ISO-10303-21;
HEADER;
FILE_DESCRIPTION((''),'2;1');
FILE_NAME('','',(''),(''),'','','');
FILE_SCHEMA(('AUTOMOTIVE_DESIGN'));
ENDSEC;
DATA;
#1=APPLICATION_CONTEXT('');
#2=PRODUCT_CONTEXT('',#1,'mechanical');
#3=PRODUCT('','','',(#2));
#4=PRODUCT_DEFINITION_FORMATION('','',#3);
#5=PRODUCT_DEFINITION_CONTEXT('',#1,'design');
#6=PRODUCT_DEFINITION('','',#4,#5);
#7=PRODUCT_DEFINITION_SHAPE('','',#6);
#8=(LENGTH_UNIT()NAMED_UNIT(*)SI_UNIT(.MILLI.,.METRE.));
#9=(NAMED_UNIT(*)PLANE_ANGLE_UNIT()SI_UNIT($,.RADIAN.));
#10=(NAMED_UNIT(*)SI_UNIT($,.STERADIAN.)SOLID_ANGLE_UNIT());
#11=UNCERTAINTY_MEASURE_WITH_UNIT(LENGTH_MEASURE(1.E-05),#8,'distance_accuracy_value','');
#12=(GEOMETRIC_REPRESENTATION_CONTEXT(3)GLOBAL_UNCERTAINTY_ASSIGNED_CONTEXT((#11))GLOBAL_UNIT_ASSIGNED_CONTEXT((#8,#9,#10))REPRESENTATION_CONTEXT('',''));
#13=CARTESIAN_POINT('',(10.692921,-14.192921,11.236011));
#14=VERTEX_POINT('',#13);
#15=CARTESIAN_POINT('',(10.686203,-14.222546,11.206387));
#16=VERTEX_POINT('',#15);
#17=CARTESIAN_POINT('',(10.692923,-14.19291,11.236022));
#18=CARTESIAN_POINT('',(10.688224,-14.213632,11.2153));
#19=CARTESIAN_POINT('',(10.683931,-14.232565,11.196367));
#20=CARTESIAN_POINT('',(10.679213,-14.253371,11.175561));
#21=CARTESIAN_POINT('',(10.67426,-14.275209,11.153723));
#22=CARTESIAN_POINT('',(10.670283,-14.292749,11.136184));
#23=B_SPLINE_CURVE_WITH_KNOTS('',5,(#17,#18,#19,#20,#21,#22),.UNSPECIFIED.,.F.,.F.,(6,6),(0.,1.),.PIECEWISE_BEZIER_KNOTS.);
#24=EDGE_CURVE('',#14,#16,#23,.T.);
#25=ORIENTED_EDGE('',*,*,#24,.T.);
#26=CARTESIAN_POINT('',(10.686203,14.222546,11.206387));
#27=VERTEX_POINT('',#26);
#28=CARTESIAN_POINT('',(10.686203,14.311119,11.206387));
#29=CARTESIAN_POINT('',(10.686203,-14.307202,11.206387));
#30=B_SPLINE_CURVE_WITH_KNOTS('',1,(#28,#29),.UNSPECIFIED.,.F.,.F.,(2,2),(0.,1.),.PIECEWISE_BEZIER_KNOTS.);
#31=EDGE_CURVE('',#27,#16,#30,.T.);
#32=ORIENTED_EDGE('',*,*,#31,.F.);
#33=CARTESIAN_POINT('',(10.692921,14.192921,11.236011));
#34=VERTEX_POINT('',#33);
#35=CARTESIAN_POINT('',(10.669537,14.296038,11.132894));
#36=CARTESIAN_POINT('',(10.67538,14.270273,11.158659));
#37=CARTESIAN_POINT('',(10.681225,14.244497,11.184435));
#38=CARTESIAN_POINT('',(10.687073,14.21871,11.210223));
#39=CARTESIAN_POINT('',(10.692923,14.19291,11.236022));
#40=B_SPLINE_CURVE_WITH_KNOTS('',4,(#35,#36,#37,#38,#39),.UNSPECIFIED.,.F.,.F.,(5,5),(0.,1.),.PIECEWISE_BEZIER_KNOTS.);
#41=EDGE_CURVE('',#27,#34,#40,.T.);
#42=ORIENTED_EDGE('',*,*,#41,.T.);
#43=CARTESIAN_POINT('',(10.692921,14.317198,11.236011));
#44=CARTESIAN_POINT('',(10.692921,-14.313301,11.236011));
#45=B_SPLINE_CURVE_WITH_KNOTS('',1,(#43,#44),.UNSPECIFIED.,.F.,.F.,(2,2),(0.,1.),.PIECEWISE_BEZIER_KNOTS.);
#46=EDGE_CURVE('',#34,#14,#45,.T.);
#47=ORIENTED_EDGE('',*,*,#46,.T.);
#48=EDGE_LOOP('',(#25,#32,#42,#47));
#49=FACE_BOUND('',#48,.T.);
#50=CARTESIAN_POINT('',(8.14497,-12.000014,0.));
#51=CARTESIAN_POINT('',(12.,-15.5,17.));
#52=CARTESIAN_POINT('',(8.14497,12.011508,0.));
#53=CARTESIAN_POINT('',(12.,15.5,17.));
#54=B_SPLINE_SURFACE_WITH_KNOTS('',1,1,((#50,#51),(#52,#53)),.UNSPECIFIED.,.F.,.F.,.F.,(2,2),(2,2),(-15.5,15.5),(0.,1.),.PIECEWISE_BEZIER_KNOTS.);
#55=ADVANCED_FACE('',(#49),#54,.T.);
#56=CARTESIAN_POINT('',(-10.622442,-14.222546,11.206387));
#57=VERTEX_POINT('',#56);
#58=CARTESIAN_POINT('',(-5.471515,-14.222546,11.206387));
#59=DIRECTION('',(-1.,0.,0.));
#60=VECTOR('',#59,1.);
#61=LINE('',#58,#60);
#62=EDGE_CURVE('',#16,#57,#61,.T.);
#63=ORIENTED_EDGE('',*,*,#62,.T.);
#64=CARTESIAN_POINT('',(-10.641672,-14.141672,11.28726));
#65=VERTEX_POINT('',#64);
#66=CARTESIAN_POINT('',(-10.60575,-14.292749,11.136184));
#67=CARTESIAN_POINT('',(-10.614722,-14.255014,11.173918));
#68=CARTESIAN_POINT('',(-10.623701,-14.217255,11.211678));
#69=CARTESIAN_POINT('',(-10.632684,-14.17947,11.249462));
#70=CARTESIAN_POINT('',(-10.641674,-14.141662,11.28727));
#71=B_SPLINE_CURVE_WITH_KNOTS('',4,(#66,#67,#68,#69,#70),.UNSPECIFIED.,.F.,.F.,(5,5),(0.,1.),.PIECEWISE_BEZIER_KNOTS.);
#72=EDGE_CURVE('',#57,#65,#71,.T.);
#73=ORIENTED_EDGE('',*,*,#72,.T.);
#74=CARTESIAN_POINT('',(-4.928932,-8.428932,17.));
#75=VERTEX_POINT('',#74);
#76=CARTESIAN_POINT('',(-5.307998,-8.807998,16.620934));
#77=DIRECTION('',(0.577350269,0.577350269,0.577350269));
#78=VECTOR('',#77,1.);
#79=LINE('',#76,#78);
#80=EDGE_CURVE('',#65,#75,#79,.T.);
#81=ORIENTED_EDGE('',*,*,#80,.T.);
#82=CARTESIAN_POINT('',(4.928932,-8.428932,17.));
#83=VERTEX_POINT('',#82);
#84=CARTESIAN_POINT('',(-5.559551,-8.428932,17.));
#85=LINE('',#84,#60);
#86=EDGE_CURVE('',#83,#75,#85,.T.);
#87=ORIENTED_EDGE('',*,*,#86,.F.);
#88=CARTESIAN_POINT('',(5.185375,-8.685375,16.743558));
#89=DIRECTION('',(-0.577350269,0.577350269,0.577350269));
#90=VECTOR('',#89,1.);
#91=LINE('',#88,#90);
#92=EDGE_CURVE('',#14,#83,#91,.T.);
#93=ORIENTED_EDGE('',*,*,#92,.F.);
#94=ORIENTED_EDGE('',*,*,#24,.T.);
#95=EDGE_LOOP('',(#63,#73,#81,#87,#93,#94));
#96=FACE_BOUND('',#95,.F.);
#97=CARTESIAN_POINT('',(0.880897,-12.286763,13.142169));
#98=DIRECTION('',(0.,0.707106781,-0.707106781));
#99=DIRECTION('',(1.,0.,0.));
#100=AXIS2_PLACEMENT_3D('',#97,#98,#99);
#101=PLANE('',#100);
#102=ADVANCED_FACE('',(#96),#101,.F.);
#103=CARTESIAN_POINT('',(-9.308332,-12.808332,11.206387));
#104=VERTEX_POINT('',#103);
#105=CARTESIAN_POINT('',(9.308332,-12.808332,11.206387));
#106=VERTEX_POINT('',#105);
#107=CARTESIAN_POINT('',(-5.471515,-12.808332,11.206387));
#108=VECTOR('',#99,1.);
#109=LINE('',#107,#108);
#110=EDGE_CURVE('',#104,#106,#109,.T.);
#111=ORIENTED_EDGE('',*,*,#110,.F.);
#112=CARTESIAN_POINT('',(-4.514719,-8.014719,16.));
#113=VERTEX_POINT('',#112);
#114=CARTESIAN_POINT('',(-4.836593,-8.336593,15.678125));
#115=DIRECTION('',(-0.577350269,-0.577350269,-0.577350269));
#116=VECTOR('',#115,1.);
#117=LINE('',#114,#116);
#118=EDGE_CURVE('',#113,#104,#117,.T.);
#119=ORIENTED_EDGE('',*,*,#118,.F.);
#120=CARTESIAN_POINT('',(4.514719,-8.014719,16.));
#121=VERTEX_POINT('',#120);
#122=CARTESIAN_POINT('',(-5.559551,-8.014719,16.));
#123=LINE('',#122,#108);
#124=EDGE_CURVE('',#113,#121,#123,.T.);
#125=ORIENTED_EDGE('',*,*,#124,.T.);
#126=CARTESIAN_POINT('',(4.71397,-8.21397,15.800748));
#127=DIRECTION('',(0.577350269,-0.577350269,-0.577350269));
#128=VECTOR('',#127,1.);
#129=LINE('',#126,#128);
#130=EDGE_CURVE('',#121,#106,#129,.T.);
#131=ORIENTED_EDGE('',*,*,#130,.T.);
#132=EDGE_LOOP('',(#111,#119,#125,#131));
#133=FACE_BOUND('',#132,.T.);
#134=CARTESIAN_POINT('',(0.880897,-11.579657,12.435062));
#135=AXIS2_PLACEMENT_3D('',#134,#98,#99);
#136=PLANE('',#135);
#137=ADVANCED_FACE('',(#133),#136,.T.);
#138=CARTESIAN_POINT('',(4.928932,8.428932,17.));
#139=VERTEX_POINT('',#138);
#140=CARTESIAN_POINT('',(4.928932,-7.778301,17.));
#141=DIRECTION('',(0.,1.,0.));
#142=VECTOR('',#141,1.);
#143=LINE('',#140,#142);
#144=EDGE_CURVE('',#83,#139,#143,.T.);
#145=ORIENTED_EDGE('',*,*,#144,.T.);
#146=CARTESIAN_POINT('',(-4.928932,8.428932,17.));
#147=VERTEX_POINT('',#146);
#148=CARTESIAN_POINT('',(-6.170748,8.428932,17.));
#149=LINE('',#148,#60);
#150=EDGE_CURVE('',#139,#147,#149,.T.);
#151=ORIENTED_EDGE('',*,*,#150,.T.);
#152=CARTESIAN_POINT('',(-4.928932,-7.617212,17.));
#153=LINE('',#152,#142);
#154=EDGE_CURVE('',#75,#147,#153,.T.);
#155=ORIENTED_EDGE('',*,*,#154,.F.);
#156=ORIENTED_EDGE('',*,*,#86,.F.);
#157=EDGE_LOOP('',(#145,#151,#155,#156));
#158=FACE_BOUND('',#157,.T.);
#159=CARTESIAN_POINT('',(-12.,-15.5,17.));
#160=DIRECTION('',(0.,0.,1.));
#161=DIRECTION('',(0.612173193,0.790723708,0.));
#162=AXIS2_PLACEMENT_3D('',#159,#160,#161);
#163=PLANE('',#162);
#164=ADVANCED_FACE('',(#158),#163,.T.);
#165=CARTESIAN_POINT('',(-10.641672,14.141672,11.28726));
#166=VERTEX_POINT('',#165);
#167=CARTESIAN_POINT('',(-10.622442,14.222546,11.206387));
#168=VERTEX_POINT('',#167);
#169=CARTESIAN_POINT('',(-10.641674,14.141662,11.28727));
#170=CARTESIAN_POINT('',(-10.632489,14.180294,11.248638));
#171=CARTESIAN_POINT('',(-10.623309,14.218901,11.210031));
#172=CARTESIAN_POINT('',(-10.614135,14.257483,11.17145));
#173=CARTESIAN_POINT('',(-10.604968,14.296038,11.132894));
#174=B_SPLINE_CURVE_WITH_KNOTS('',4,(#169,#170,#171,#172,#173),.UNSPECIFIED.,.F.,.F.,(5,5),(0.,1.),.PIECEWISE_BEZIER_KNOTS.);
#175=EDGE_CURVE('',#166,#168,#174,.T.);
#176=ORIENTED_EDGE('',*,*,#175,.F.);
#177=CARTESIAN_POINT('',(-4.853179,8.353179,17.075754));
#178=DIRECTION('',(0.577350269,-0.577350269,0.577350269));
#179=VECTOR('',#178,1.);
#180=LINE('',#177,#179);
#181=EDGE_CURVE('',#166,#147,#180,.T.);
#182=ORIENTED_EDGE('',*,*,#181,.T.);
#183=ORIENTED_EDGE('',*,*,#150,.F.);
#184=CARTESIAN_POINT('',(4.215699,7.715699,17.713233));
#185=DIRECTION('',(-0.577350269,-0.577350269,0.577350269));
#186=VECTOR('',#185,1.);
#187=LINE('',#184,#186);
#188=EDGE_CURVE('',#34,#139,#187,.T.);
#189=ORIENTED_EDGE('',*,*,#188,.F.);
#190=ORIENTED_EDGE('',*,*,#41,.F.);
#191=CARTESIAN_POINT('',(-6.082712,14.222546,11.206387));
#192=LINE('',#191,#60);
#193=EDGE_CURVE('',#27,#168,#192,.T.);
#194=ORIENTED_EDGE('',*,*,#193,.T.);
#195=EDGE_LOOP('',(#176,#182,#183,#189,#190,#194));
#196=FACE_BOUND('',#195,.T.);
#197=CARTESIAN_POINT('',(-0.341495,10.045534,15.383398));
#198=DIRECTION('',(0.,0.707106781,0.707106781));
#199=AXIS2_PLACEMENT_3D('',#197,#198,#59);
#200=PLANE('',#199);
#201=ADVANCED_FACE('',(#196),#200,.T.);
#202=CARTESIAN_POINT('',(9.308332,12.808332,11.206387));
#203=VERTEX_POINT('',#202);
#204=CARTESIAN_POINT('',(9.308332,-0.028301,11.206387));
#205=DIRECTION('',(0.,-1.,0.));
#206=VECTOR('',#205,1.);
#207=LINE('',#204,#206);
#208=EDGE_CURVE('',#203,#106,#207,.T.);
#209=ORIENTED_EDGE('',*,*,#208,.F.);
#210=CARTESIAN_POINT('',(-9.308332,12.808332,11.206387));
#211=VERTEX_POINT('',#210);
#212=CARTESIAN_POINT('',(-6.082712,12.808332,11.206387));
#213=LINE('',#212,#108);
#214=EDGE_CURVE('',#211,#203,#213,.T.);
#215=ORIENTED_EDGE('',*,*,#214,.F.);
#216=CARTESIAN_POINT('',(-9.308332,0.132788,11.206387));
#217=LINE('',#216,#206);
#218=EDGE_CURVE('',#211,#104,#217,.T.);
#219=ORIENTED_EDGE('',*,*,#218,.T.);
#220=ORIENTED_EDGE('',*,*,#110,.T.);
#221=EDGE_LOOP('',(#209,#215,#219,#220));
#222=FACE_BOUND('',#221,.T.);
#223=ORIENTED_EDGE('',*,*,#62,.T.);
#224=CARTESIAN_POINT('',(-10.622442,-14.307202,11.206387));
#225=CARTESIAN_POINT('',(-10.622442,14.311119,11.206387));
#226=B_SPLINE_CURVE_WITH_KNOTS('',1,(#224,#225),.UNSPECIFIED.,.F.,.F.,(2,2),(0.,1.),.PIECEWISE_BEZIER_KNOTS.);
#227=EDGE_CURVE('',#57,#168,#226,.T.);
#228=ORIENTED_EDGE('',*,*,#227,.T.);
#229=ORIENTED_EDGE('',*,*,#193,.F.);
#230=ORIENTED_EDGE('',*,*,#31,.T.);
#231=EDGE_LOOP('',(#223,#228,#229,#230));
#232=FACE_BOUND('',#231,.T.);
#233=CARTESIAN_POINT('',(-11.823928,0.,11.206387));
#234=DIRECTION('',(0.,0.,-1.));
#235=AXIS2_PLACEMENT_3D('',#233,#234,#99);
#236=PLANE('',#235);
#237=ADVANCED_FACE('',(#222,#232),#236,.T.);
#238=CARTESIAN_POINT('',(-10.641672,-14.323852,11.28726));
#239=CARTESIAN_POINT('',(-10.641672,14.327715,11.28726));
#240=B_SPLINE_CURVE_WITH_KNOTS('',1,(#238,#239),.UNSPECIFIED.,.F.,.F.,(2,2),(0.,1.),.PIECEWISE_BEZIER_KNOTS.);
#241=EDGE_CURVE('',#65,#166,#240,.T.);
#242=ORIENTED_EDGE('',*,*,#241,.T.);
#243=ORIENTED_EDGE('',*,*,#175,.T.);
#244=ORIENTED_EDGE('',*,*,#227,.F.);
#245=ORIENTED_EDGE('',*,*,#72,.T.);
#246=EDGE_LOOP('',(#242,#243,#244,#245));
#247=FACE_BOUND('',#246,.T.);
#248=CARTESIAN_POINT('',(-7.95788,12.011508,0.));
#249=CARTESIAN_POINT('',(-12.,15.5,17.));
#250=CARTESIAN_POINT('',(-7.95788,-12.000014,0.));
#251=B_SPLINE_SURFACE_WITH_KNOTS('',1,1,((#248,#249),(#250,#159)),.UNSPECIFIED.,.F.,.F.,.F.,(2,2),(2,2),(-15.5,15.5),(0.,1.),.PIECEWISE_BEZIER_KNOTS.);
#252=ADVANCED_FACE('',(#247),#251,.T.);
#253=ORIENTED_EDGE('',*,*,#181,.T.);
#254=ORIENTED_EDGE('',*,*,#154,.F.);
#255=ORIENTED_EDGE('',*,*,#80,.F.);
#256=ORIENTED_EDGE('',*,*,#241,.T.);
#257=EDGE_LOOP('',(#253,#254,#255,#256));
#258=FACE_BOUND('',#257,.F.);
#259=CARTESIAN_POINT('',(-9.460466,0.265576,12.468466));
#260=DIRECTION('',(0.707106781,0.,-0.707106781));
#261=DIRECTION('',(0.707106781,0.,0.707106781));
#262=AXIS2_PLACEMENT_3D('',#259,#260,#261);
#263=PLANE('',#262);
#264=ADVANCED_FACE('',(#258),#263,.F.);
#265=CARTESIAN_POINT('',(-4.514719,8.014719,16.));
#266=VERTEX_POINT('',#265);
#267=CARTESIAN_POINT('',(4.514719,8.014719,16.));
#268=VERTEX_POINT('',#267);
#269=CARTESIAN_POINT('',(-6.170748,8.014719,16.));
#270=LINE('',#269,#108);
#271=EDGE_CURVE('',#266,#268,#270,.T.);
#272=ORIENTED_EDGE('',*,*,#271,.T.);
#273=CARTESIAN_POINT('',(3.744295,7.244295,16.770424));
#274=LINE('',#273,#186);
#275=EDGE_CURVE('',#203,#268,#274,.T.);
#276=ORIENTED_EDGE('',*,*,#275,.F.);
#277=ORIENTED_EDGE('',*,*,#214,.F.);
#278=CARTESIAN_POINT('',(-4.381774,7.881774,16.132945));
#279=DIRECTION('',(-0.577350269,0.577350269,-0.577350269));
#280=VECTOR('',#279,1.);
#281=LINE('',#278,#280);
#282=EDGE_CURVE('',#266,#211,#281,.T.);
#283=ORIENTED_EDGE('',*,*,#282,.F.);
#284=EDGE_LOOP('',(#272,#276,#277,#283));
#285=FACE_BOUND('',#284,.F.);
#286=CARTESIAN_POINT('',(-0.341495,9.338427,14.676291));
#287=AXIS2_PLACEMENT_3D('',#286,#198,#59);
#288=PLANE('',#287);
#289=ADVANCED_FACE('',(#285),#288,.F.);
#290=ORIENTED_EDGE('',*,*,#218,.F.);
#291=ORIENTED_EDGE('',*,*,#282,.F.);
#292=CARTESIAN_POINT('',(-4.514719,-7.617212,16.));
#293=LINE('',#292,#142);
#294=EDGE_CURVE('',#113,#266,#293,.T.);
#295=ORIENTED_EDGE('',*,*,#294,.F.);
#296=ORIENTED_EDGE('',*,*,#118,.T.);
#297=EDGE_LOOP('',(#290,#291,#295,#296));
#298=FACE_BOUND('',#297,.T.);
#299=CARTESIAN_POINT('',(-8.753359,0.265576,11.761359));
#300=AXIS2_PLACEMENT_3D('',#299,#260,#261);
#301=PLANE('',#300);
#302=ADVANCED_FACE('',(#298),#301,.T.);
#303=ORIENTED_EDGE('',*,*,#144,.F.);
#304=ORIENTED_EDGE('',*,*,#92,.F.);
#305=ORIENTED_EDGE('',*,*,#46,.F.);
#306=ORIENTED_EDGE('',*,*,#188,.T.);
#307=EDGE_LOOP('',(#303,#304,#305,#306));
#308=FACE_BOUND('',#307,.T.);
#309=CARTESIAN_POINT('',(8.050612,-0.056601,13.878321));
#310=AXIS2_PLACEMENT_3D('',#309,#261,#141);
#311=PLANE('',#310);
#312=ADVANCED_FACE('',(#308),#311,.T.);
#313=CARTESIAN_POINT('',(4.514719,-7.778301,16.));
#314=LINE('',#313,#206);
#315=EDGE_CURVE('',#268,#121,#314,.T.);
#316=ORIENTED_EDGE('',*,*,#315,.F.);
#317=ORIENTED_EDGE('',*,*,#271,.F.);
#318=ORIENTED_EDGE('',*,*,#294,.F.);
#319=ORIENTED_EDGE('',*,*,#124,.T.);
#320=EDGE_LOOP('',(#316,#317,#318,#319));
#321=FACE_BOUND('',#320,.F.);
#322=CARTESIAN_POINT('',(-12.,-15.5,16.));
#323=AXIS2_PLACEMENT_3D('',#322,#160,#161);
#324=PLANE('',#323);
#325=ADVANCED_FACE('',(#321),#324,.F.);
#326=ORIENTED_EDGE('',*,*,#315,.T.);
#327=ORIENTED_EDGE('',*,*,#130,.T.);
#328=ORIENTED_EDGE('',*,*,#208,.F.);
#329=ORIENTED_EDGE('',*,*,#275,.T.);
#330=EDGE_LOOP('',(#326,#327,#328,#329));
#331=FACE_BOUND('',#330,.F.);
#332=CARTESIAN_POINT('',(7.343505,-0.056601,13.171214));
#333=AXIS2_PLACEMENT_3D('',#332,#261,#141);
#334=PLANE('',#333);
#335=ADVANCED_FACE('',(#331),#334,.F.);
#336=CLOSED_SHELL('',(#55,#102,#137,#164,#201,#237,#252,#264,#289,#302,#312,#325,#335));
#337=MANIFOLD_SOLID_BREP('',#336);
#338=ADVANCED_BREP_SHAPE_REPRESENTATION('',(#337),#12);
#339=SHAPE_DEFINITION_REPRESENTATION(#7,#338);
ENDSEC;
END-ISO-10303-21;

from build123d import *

# Parameters (mm, degrees)
F0_W      = 16.1028504372
F0_H      = 24.0115216002
F2_W      = 24
F2_H      = 31
F5_W      = 14.02631565
F5_H      = 35.0832007825
F6_DEPTH  = 5
F8_W      = 36.7084983736
F8_H      = 15.6723505352
F9_DEPTH  = 5
F11_W     = 29.3105235323
F11_H     = 18.8404771034
F12_DEPTH = 5
F14_W     = 31.5226018429
F14_H     = 13.2806529291
F15_DEPTH = 5
F16_W     = 23.4492318705
F16_H     = 12.546513346
F17_DEPTH = 25.4
F18_T     = 1


# Not quite as in the source:
# - a shell that OpenCascade refuses in one call is made with other operations: the cavity is built on its own and cut out


with BuildPart() as f3:
    # F0 (on Top) → F3 section 0
    with BuildSketch(Plane.XY):
        with Locations((0.0935448334, 0.0057467259)):
            Rectangle(F0_W, F0_H)
    # F2 (on offset) → F3 section 1
    with BuildSketch(Plane.XY.offset(17)):
        Rectangle(F2_W, F2_H)
    loft()

    # F5 (on face) → F6 (cut)
    with BuildSketch(Plane(origin=(-14.5, 0, 14.5), x_dir=(0.7071067812, 0, 0.7071067812), z_dir=(0.7071067812, 0, -0.7071067812))):
        with Locations((2.1269769641, -0.2655759454)):
            Rectangle(F5_W, F5_H)
    extrude(amount=F6_DEPTH, mode=Mode.SUBTRACT)

    # F8 (on face) → F9 (cut)
    with BuildSketch(Plane(origin=(14.5, 0, 14.5), x_dir=(0, 1, 0), z_dir=(0.7071067812, 0, 0.7071067812))):
        with Locations((-0.0566011295, 4.1208126349)):
            Rectangle(F8_W, F8_H)
    extrude(amount=-F9_DEPTH, mode=Mode.SUBTRACT)

    # F11 (on face) → F12 (cut)
    with BuildSketch(Plane(origin=(0, 16.25, 16.25), x_dir=(-1, 0, 0), z_dir=(0, 0.7071067812, 0.7071067812))):
        with Locations((0.3414950334, 3.7744397996)):
            Rectangle(F11_W, F11_H)
    extrude(amount=-F12_DEPTH, mode=Mode.SUBTRACT)

    # F14 (on face) → F15 (cut)
    with BuildSketch(Plane(origin=(0, -16.25, 16.25), x_dir=(1, 0, 0), z_dir=(0, 0.7071067812, -0.7071067812))):
        with Locations((0.8808970451, -0.6048630457)):
            Rectangle(F14_W, F14_H)
    extrude(amount=F15_DEPTH, mode=Mode.SUBTRACT)

    # F16 (on Front) → F17 (cut, symmetric)
    with BuildSketch(Plane.XZ):
        with Locations((-0.0993120484, 4.9331299379)):
            Rectangle(F16_W, F16_H)
    extrude(amount=F17_DEPTH, both=True, mode=Mode.SUBTRACT)

    # F18: shell of thickness 1, made by hand


with BuildPart() as f18_core1:
    # F18_t2: copy of F3
    add(f3.part)

    # the walls: a layer under each face that stays
    f18_faces = [f18_core1.faces().sort_by_distance(p)[0] for p in [
        (10.6895617231, -5.424e-06, 11.2211990551),
        (0.0256243836, -11.3257388827, 14.1031933054),
        (7.8109264385, 0, 14.1180057497),
        (0.0256243836, 11.3257388827, 14.1031933054),
        (0, 0, 17),
        (-7.7853020549, 0, 14.1436301332),
        (-10.6320571867, -1.4807e-05, 11.2468234387),
    ]]
    thicken(f18_faces, amount=-F18_T, mode=Mode.SUBTRACT)


with BuildPart() as f3_1:
    add(f3.part)

    # what is left inside the walls is the cavity
    f18_cavity = [f18_core1.part.solids().sort_by_distance(p)[0] for p in [
        (0, 4.269444, 11.216387),
    ]]
    add(f18_cavity, mode=Mode.SUBTRACT)


solid = f3_1.part
